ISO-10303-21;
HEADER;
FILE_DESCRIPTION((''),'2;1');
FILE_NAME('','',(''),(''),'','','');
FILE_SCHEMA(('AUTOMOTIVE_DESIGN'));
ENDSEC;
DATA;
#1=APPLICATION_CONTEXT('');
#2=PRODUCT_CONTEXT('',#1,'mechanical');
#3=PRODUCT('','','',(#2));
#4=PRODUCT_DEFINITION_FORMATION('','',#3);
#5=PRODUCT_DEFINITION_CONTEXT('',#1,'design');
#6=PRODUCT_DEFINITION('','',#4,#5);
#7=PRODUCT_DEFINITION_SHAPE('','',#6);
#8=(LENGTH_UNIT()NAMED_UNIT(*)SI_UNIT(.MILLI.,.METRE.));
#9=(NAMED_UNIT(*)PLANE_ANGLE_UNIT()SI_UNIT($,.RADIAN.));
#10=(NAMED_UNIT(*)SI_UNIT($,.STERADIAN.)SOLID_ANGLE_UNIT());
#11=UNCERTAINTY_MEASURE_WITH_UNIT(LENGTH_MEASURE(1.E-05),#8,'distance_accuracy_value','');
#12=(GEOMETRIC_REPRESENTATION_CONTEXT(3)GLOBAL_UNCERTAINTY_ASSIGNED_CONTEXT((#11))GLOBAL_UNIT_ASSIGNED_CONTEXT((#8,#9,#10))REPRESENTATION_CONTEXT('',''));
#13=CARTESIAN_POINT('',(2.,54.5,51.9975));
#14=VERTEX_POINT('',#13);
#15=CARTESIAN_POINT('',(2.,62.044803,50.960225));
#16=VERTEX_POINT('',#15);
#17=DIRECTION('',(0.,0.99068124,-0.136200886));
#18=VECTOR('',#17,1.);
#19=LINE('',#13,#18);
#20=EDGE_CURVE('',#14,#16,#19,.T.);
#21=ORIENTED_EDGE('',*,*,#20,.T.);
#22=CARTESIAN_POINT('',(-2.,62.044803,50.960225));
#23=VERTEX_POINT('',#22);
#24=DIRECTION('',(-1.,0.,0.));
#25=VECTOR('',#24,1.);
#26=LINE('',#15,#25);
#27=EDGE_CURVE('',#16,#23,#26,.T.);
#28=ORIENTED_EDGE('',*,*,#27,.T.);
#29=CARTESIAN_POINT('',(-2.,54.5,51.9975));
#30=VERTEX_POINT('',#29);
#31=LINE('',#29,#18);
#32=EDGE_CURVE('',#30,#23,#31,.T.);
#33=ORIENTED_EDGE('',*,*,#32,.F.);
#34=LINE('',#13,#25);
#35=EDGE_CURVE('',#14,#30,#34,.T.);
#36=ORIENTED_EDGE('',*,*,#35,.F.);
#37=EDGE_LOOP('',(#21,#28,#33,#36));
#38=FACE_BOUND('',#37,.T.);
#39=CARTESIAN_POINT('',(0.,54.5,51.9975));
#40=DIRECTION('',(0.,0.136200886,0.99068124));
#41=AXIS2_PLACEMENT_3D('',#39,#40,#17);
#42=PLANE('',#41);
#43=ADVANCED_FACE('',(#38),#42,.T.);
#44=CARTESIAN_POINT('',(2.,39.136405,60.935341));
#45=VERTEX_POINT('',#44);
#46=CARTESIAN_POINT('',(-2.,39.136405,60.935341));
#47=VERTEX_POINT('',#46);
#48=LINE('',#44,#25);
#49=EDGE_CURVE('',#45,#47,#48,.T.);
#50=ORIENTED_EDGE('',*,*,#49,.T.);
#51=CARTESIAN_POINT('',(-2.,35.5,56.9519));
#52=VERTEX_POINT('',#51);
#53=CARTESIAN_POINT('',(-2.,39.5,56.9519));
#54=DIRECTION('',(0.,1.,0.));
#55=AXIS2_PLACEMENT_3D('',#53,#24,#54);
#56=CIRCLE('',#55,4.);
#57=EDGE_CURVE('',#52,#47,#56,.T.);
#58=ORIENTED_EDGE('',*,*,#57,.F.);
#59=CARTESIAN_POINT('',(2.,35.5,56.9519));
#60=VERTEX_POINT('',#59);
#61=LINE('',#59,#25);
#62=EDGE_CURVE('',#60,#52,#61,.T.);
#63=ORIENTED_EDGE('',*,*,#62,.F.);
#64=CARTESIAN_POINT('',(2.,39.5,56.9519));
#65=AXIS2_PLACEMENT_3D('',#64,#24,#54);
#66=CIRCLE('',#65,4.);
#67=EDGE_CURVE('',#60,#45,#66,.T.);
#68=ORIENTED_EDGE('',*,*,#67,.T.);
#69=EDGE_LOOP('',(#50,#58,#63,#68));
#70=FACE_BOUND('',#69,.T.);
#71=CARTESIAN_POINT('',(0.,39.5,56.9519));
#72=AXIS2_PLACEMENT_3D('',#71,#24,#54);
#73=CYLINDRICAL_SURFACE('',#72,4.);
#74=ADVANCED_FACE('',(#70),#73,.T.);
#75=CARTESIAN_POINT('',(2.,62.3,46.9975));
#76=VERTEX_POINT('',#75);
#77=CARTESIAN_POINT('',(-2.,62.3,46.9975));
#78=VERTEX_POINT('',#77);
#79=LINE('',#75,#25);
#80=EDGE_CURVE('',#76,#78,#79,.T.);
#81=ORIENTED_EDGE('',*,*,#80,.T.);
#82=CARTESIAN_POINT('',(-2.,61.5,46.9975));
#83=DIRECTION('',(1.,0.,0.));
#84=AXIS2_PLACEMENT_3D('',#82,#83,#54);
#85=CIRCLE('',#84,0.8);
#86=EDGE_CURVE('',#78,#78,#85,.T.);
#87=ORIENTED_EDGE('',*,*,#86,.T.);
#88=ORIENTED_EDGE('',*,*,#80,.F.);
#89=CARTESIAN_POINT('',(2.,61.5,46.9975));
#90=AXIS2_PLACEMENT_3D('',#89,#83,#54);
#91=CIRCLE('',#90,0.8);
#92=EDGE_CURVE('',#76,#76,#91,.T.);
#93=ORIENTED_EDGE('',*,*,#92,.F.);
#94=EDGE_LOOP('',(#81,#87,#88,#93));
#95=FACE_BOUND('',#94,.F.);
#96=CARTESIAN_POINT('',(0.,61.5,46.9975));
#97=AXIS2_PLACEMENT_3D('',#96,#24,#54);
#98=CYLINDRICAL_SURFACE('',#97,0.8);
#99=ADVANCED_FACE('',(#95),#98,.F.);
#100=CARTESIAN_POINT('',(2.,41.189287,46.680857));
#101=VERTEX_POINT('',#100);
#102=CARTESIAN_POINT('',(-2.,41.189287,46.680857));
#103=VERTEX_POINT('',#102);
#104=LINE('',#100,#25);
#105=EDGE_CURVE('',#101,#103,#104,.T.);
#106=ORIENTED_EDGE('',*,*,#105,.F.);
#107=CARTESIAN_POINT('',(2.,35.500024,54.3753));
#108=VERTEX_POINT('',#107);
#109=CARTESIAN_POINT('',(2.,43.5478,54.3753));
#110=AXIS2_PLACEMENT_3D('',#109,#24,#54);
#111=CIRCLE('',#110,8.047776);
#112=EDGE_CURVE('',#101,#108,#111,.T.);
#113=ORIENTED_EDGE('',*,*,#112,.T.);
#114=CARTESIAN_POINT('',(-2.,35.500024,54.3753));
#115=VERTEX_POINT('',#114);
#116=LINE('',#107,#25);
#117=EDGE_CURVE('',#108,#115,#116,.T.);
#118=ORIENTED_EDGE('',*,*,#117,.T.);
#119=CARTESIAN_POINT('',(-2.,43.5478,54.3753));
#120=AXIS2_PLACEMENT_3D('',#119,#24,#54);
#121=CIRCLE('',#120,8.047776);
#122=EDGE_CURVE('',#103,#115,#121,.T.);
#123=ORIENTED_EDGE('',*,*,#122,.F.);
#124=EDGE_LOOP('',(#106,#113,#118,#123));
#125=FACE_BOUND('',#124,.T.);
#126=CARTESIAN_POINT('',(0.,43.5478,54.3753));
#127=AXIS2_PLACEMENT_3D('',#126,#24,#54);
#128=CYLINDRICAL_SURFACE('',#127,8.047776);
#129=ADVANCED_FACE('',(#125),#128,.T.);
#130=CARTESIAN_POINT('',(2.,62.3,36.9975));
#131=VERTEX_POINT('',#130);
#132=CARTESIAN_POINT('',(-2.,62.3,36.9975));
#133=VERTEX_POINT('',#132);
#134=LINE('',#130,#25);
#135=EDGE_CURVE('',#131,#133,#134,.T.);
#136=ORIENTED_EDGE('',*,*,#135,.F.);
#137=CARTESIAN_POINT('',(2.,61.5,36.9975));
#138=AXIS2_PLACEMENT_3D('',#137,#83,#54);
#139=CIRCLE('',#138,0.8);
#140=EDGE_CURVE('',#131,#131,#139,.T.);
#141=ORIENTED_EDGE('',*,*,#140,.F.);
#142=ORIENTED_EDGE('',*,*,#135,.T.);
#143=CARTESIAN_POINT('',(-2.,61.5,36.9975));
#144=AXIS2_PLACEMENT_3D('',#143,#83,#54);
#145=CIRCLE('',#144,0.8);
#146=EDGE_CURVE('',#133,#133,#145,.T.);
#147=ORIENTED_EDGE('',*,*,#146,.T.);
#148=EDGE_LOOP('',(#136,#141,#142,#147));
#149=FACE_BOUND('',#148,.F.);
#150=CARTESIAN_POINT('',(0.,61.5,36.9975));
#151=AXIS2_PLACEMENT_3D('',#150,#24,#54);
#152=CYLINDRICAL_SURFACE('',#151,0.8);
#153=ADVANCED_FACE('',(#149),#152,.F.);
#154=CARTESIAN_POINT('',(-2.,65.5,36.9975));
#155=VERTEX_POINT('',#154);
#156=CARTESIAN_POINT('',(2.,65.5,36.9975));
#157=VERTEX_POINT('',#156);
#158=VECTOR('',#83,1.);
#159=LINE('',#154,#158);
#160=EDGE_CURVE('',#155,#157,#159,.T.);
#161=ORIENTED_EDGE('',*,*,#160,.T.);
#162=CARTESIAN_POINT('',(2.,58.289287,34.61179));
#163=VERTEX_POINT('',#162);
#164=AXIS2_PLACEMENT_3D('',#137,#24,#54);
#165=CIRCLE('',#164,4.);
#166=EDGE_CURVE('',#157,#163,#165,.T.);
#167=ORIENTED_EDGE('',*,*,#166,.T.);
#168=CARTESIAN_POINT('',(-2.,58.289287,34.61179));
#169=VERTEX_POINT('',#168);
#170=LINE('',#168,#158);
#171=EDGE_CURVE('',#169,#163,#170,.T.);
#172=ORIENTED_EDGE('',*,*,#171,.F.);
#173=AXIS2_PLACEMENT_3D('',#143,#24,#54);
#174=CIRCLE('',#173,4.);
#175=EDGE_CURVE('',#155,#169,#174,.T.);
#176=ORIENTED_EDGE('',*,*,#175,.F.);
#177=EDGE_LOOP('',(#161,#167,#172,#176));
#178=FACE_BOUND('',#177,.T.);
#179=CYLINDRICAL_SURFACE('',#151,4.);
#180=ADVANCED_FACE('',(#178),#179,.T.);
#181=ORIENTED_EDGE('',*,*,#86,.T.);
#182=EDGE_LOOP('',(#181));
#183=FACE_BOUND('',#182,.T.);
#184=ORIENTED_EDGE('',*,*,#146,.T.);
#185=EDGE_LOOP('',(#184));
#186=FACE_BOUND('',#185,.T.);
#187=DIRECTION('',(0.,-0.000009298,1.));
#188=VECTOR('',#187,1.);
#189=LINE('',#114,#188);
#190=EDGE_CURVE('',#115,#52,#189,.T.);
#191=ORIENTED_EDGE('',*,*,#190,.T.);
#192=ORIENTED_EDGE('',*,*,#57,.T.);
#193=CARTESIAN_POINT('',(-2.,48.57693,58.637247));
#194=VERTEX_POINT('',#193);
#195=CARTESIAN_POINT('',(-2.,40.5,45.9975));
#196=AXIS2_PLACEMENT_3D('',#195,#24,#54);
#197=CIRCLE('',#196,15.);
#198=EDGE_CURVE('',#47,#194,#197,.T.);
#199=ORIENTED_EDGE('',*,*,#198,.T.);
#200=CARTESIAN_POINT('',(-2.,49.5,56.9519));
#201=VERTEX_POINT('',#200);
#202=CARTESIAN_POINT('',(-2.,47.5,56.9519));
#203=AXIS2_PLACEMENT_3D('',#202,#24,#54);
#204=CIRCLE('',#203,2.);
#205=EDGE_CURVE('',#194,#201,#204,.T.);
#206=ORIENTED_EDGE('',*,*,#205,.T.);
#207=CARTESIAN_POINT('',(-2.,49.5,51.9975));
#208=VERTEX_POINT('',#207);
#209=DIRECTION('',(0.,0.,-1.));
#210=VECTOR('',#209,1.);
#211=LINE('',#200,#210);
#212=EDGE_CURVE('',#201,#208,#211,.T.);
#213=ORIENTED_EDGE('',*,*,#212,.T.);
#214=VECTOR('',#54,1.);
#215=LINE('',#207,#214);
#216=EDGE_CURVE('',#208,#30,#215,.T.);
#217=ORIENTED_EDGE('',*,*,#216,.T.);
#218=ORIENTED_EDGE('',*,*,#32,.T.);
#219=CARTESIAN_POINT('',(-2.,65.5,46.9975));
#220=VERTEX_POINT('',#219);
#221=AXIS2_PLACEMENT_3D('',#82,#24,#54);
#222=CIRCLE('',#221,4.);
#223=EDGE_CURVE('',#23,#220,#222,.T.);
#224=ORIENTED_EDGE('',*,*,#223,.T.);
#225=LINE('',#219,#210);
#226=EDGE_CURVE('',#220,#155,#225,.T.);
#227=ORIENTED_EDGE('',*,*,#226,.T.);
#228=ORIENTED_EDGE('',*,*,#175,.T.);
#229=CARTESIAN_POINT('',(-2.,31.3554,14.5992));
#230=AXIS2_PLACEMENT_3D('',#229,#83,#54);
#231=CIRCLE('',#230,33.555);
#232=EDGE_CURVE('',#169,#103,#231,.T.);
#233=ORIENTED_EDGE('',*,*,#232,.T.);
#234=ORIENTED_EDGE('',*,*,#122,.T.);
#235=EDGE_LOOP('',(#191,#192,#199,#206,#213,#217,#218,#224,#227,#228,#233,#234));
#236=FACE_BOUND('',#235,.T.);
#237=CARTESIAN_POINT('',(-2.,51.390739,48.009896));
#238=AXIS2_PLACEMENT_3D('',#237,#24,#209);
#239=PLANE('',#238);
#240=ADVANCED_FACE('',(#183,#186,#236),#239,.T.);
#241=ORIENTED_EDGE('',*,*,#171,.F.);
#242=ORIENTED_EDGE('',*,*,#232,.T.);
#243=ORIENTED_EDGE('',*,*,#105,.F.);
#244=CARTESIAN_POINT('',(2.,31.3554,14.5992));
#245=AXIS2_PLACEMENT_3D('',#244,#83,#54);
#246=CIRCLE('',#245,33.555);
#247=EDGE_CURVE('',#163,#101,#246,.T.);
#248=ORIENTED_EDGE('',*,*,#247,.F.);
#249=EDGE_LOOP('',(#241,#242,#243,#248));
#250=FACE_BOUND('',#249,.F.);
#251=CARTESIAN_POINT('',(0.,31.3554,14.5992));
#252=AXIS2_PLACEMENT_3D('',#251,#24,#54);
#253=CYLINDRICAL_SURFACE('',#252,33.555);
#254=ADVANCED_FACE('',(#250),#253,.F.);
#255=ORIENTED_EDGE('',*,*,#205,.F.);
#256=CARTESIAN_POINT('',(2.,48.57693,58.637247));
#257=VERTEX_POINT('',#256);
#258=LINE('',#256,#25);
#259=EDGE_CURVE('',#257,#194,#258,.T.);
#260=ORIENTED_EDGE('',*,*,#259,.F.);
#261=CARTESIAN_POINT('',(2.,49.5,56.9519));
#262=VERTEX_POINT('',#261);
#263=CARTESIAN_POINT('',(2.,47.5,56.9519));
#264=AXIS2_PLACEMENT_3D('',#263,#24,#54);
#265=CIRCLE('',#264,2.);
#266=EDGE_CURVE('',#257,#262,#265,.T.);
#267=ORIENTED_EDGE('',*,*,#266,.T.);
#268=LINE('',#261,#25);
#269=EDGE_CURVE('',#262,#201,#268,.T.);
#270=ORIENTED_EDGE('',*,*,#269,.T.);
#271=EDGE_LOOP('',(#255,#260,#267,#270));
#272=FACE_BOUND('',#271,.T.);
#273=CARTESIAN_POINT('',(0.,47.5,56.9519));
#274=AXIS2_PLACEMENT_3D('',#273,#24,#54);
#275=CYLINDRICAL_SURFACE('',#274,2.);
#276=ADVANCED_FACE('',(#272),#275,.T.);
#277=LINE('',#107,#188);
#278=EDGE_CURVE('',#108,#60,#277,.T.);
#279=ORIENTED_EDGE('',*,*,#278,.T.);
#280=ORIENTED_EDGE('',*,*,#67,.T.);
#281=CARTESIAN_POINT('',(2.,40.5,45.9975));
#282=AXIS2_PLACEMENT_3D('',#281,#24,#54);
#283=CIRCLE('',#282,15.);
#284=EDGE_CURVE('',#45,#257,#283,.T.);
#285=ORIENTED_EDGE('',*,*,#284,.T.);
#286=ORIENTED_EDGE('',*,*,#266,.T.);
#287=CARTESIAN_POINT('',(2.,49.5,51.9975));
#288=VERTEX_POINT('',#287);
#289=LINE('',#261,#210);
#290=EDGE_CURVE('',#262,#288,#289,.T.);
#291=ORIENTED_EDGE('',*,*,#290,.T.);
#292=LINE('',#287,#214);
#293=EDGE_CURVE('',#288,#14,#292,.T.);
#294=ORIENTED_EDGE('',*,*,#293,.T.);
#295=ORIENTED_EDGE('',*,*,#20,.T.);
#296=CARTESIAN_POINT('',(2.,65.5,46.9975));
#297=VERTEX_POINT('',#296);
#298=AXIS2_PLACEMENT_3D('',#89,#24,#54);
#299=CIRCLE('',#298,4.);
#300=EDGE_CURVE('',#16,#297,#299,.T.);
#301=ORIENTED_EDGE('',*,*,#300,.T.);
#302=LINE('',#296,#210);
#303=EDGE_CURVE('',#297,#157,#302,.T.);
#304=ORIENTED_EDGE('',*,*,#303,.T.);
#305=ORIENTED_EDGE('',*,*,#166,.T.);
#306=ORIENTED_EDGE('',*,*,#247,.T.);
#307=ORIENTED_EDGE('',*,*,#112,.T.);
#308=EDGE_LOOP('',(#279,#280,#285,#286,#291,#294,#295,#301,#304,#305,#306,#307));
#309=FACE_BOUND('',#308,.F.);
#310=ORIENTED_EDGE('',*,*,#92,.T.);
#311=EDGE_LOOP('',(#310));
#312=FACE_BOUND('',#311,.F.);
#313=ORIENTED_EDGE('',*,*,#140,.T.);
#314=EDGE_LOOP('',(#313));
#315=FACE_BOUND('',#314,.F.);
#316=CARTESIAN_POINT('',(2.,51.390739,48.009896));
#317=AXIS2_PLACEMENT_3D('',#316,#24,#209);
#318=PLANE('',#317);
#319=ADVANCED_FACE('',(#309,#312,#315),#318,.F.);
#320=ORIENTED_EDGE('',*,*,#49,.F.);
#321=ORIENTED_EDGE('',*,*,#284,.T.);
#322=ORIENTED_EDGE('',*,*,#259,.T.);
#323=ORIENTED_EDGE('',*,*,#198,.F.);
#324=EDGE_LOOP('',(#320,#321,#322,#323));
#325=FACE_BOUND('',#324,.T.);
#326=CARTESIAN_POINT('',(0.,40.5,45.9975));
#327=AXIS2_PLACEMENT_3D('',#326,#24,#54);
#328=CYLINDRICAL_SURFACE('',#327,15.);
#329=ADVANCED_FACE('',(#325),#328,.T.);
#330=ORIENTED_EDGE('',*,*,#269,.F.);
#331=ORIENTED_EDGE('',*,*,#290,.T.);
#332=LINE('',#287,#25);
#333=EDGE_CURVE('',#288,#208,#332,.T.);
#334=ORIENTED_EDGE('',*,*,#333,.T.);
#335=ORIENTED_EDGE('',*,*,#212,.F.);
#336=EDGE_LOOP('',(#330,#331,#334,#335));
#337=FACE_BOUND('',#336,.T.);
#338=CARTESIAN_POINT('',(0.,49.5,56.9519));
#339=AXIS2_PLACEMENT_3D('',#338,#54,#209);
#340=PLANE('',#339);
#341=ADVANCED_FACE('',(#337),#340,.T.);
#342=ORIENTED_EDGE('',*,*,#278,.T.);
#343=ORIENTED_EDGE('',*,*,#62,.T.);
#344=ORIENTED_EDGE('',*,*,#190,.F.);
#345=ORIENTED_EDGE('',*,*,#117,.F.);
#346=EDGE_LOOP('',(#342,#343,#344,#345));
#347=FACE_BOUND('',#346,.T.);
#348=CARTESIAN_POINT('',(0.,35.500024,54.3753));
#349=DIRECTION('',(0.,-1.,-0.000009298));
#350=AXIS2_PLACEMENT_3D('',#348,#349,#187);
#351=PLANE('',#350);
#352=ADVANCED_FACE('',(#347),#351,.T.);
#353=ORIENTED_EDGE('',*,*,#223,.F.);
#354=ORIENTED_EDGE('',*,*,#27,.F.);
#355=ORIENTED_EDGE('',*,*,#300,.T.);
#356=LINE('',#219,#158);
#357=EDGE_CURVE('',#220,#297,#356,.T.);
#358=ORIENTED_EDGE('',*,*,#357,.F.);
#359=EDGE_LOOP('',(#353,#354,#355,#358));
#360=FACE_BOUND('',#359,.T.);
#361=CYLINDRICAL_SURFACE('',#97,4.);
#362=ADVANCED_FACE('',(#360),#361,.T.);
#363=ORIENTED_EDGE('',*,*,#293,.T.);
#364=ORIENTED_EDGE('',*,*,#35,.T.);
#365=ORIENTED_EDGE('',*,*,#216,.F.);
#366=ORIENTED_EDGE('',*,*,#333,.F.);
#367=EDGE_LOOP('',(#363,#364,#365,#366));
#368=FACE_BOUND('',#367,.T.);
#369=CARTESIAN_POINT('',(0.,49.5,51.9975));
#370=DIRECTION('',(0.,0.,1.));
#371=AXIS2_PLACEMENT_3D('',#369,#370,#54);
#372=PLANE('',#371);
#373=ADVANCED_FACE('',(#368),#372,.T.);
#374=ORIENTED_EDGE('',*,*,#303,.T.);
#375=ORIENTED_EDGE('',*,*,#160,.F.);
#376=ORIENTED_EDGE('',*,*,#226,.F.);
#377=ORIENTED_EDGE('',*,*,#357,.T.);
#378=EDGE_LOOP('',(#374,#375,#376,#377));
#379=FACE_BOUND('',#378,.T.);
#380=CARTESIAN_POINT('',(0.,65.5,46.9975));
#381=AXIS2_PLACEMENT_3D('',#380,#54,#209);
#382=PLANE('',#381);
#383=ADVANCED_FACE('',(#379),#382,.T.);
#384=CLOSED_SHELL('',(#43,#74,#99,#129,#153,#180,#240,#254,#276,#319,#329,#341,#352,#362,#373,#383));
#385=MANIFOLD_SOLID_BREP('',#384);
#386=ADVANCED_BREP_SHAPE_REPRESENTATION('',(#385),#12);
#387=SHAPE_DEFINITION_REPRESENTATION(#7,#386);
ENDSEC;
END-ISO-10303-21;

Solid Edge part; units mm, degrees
sketch "Sketch1" plane through (0, 0, 0) normal (1, 0, 0) x (0, 1, 0)
  arc A0 (58.2893, 34.6118) -> (41.1893, 46.6809) centre (31.3554, 14.5992) ccw
  arc A1 (41.1893, 46.6809) -> (35.5, 54.3753) centre (43.5478, 54.3753) cw
  line L0 (35.5, 54.3753) -> (35.5, 56.9519)
  arc A2 (35.5, 56.9519) -> (39.1364, 60.9354) centre (39.5, 56.9519) cw
  arc A3 (39.1364, 60.9354) -> (48.5769, 58.6372) centre (40.5, 45.9975) cw
  arc A4 (48.5769, 58.6372) -> (49.5, 56.9519) centre (47.5, 56.9519) cw
  line L1 (49.5, 56.9519) -> (49.5, 51.9975)
  line L2 (49.5, 51.9975) -> (54.5, 51.9975)
  line L3 (54.5, 51.9975) -> (62.0448, 50.9602)
  arc A5 (62.0448, 50.9602) -> (65.5, 46.9975) centre (61.5, 46.9975) cw
  line L4 (65.5, 46.9975) -> (65.5, 36.9975)
  arc A6 (65.5, 36.9975) -> (58.2893, 34.6118) centre (61.5, 36.9975) cw
  circle A7 centre (61.5, 46.9975) radius 0.8
  circle A8 centre (61.5, 36.9975) radius 0.8
extrude "Protrusion1" add sketch "Sketch1" along normal mid plane 4
